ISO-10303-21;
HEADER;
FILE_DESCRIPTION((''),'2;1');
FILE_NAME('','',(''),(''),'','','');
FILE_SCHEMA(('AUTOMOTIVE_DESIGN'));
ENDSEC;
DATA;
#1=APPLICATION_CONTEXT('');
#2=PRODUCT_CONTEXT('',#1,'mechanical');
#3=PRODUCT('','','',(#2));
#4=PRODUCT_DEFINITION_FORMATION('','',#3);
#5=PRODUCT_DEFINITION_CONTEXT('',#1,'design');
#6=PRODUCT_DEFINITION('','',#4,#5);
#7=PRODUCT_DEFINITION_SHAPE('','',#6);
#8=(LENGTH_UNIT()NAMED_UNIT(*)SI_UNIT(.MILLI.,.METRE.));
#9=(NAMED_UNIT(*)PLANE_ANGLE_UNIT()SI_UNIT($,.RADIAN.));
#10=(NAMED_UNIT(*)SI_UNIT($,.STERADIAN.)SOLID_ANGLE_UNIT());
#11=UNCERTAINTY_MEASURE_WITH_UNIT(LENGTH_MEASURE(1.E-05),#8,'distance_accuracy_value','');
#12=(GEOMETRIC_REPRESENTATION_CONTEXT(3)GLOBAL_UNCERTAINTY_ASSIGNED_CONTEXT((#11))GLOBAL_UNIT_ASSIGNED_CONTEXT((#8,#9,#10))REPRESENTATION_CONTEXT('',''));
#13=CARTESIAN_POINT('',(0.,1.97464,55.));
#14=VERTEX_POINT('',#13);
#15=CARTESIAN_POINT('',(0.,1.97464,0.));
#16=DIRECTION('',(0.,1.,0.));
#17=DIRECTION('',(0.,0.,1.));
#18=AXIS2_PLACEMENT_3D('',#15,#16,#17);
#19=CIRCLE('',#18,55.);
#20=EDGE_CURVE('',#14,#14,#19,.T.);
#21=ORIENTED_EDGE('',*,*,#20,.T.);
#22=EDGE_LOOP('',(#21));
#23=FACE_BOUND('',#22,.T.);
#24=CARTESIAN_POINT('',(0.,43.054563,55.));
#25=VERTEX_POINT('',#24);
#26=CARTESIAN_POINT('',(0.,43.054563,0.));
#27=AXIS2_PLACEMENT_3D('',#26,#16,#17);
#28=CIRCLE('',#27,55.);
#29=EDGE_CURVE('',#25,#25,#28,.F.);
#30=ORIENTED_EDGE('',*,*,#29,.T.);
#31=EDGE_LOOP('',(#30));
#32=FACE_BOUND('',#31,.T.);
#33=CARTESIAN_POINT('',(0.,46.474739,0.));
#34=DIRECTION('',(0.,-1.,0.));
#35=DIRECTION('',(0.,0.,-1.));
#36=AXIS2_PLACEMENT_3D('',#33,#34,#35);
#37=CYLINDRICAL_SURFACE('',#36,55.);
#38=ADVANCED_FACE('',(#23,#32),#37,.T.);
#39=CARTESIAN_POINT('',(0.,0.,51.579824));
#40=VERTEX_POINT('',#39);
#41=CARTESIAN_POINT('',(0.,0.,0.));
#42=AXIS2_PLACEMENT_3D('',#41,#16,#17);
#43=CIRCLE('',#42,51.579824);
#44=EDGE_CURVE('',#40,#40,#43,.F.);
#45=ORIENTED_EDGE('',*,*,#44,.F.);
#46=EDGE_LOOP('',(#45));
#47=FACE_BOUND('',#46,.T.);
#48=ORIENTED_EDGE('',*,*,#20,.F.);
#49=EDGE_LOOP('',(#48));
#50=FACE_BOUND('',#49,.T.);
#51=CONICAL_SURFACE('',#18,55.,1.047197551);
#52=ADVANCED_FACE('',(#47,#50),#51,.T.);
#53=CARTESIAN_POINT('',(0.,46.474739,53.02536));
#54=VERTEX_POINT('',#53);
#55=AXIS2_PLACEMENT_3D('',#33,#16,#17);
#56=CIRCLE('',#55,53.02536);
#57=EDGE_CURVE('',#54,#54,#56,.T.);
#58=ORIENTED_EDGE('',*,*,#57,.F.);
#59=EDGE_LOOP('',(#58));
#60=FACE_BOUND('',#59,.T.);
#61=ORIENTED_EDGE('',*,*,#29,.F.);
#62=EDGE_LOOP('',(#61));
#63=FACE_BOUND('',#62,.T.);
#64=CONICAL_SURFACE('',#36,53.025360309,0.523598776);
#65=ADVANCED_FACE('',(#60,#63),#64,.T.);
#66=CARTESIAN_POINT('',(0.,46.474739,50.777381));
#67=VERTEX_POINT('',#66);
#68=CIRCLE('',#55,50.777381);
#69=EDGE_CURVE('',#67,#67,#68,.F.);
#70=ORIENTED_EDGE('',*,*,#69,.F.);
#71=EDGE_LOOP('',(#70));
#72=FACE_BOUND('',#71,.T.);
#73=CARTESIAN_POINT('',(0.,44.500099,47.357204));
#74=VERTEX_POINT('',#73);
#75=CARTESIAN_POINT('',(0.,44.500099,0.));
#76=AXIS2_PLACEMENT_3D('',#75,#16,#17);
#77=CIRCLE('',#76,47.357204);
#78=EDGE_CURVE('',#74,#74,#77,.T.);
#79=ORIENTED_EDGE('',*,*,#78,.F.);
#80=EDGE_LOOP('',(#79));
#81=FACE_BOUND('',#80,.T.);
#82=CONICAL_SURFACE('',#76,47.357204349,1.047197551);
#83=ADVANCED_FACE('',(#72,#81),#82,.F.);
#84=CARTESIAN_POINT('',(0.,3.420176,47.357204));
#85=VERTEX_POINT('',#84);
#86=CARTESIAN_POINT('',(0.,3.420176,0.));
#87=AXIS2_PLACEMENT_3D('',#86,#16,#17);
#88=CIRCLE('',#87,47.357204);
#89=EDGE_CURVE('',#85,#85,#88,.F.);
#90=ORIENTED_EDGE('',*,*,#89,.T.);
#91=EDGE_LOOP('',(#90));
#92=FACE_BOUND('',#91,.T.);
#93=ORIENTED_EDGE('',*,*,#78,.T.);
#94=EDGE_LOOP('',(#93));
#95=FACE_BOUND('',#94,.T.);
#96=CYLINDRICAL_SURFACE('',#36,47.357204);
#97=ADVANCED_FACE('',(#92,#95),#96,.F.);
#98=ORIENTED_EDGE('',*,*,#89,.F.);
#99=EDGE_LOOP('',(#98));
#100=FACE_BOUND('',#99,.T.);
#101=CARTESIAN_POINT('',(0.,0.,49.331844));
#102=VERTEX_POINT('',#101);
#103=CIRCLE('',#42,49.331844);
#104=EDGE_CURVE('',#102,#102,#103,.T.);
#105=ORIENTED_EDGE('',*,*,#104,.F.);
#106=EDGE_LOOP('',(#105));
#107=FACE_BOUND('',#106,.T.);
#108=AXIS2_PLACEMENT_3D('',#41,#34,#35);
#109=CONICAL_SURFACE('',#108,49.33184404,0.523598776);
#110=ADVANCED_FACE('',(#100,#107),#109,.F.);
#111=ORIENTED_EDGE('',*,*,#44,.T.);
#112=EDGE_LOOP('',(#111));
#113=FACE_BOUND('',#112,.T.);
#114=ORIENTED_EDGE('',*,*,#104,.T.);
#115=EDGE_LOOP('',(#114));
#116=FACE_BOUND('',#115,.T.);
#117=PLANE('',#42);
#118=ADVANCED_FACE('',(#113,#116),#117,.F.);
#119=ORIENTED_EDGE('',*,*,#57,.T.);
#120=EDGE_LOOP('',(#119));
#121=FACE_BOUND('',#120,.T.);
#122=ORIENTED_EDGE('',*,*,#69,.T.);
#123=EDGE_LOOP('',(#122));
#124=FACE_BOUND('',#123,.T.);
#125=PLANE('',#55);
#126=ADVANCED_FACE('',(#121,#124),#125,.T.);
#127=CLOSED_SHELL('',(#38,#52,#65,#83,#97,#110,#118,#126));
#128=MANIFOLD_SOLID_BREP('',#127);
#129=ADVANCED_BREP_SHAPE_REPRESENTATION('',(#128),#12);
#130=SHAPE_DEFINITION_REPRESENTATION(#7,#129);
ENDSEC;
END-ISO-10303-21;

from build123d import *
from OCP.BRepFilletAPI import BRepFilletAPI_MakeChamfer

# Parameters (mm, degrees)
SKETCH1_R           = 55
BOSS_EXTRUDE1_DEPTH = 46.474739133
SKETCH2_R           = 47.357204349
CUT_EXTRUDE1_DEPTH  = 91.608506099
CHAMFER1_SIZE       = 3.420176272
CHAMFER1_SIZE2      = 1.974639691


with BuildPart() as part:
    # Sketch1 → Boss-Extrude1 (new body)
    with BuildSketch(Plane(origin=(0, 0, 0), x_dir=(1, 0, 0), z_dir=(0, 1, 0))):
        Circle(SKETCH1_R)
    extrude(amount=BOSS_EXTRUDE1_DEPTH)

    # Sketch2 → Cut-Extrude1 (cut, through all)
    with BuildSketch(Plane(origin=(0, 0, 0), x_dir=(1, 0, 0), z_dir=(0, 1, 0))):
        Circle(SKETCH2_R)
    extrude(amount=CUT_EXTRUDE1_DEPTH, mode=Mode.SUBTRACT)

    # Chamfer1: one chamfer whose edges measure the first distance from different faces: ONE call of the kernel's chamfer builder (chamfer() names one face for all edges)
    chamfer1_edges_1 = [part.edges().sort_by_distance(p)[0] for p in [
        (-47.357204349, 46.474739133, 0),
    ]]
    chamfer1_side_1 = [part.faces().sort_by_distance(p)[0] for p in [
        (-53.444365081, 46.474739133, 0),
    ]]
    chamfer1_edges_2 = [part.edges().sort_by_distance(p)[0] for p in [
        (-47.357204349, 0, 0),
    ]]
    chamfer1_side_2 = [part.faces().sort_by_distance(p)[0] for p in [
        (-47.357204349, 23.237369566, 0),
    ]]
    chamfer1_edges_3 = [part.edges().sort_by_distance(p)[0] for p in [
        (-55, 0, 0),
    ]]
    chamfer1_side_3 = [part.faces().sort_by_distance(p)[0] for p in [
        (-53.444365081, 0, 0),
    ]]
    chamfer1_edges_4 = [part.edges().sort_by_distance(p)[0] for p in [
        (-55, 46.474739133, 0),
    ]]
    chamfer1_side_4 = [part.faces().sort_by_distance(p)[0] for p in [
        (-55, 23.237369566, 0),
    ]]
    chamfer1 = BRepFilletAPI_MakeChamfer(part.part.solid().wrapped)
    for e in chamfer1_edges_1:
        chamfer1.Add(CHAMFER1_SIZE, CHAMFER1_SIZE2, e.wrapped, chamfer1_side_1[0].wrapped)  # the first distance lies on this face
    for e in chamfer1_edges_2:
        chamfer1.Add(CHAMFER1_SIZE, CHAMFER1_SIZE2, e.wrapped, chamfer1_side_2[0].wrapped)  # the first distance lies on this face
    for e in chamfer1_edges_3:
        chamfer1.Add(CHAMFER1_SIZE, CHAMFER1_SIZE2, e.wrapped, chamfer1_side_3[0].wrapped)  # the first distance lies on this face
    for e in chamfer1_edges_4:
        chamfer1.Add(CHAMFER1_SIZE, CHAMFER1_SIZE2, e.wrapped, chamfer1_side_4[0].wrapped)  # the first distance lies on this face
    add(Compound.cast(chamfer1.Shape()), mode=Mode.REPLACE)


solid = part.part
